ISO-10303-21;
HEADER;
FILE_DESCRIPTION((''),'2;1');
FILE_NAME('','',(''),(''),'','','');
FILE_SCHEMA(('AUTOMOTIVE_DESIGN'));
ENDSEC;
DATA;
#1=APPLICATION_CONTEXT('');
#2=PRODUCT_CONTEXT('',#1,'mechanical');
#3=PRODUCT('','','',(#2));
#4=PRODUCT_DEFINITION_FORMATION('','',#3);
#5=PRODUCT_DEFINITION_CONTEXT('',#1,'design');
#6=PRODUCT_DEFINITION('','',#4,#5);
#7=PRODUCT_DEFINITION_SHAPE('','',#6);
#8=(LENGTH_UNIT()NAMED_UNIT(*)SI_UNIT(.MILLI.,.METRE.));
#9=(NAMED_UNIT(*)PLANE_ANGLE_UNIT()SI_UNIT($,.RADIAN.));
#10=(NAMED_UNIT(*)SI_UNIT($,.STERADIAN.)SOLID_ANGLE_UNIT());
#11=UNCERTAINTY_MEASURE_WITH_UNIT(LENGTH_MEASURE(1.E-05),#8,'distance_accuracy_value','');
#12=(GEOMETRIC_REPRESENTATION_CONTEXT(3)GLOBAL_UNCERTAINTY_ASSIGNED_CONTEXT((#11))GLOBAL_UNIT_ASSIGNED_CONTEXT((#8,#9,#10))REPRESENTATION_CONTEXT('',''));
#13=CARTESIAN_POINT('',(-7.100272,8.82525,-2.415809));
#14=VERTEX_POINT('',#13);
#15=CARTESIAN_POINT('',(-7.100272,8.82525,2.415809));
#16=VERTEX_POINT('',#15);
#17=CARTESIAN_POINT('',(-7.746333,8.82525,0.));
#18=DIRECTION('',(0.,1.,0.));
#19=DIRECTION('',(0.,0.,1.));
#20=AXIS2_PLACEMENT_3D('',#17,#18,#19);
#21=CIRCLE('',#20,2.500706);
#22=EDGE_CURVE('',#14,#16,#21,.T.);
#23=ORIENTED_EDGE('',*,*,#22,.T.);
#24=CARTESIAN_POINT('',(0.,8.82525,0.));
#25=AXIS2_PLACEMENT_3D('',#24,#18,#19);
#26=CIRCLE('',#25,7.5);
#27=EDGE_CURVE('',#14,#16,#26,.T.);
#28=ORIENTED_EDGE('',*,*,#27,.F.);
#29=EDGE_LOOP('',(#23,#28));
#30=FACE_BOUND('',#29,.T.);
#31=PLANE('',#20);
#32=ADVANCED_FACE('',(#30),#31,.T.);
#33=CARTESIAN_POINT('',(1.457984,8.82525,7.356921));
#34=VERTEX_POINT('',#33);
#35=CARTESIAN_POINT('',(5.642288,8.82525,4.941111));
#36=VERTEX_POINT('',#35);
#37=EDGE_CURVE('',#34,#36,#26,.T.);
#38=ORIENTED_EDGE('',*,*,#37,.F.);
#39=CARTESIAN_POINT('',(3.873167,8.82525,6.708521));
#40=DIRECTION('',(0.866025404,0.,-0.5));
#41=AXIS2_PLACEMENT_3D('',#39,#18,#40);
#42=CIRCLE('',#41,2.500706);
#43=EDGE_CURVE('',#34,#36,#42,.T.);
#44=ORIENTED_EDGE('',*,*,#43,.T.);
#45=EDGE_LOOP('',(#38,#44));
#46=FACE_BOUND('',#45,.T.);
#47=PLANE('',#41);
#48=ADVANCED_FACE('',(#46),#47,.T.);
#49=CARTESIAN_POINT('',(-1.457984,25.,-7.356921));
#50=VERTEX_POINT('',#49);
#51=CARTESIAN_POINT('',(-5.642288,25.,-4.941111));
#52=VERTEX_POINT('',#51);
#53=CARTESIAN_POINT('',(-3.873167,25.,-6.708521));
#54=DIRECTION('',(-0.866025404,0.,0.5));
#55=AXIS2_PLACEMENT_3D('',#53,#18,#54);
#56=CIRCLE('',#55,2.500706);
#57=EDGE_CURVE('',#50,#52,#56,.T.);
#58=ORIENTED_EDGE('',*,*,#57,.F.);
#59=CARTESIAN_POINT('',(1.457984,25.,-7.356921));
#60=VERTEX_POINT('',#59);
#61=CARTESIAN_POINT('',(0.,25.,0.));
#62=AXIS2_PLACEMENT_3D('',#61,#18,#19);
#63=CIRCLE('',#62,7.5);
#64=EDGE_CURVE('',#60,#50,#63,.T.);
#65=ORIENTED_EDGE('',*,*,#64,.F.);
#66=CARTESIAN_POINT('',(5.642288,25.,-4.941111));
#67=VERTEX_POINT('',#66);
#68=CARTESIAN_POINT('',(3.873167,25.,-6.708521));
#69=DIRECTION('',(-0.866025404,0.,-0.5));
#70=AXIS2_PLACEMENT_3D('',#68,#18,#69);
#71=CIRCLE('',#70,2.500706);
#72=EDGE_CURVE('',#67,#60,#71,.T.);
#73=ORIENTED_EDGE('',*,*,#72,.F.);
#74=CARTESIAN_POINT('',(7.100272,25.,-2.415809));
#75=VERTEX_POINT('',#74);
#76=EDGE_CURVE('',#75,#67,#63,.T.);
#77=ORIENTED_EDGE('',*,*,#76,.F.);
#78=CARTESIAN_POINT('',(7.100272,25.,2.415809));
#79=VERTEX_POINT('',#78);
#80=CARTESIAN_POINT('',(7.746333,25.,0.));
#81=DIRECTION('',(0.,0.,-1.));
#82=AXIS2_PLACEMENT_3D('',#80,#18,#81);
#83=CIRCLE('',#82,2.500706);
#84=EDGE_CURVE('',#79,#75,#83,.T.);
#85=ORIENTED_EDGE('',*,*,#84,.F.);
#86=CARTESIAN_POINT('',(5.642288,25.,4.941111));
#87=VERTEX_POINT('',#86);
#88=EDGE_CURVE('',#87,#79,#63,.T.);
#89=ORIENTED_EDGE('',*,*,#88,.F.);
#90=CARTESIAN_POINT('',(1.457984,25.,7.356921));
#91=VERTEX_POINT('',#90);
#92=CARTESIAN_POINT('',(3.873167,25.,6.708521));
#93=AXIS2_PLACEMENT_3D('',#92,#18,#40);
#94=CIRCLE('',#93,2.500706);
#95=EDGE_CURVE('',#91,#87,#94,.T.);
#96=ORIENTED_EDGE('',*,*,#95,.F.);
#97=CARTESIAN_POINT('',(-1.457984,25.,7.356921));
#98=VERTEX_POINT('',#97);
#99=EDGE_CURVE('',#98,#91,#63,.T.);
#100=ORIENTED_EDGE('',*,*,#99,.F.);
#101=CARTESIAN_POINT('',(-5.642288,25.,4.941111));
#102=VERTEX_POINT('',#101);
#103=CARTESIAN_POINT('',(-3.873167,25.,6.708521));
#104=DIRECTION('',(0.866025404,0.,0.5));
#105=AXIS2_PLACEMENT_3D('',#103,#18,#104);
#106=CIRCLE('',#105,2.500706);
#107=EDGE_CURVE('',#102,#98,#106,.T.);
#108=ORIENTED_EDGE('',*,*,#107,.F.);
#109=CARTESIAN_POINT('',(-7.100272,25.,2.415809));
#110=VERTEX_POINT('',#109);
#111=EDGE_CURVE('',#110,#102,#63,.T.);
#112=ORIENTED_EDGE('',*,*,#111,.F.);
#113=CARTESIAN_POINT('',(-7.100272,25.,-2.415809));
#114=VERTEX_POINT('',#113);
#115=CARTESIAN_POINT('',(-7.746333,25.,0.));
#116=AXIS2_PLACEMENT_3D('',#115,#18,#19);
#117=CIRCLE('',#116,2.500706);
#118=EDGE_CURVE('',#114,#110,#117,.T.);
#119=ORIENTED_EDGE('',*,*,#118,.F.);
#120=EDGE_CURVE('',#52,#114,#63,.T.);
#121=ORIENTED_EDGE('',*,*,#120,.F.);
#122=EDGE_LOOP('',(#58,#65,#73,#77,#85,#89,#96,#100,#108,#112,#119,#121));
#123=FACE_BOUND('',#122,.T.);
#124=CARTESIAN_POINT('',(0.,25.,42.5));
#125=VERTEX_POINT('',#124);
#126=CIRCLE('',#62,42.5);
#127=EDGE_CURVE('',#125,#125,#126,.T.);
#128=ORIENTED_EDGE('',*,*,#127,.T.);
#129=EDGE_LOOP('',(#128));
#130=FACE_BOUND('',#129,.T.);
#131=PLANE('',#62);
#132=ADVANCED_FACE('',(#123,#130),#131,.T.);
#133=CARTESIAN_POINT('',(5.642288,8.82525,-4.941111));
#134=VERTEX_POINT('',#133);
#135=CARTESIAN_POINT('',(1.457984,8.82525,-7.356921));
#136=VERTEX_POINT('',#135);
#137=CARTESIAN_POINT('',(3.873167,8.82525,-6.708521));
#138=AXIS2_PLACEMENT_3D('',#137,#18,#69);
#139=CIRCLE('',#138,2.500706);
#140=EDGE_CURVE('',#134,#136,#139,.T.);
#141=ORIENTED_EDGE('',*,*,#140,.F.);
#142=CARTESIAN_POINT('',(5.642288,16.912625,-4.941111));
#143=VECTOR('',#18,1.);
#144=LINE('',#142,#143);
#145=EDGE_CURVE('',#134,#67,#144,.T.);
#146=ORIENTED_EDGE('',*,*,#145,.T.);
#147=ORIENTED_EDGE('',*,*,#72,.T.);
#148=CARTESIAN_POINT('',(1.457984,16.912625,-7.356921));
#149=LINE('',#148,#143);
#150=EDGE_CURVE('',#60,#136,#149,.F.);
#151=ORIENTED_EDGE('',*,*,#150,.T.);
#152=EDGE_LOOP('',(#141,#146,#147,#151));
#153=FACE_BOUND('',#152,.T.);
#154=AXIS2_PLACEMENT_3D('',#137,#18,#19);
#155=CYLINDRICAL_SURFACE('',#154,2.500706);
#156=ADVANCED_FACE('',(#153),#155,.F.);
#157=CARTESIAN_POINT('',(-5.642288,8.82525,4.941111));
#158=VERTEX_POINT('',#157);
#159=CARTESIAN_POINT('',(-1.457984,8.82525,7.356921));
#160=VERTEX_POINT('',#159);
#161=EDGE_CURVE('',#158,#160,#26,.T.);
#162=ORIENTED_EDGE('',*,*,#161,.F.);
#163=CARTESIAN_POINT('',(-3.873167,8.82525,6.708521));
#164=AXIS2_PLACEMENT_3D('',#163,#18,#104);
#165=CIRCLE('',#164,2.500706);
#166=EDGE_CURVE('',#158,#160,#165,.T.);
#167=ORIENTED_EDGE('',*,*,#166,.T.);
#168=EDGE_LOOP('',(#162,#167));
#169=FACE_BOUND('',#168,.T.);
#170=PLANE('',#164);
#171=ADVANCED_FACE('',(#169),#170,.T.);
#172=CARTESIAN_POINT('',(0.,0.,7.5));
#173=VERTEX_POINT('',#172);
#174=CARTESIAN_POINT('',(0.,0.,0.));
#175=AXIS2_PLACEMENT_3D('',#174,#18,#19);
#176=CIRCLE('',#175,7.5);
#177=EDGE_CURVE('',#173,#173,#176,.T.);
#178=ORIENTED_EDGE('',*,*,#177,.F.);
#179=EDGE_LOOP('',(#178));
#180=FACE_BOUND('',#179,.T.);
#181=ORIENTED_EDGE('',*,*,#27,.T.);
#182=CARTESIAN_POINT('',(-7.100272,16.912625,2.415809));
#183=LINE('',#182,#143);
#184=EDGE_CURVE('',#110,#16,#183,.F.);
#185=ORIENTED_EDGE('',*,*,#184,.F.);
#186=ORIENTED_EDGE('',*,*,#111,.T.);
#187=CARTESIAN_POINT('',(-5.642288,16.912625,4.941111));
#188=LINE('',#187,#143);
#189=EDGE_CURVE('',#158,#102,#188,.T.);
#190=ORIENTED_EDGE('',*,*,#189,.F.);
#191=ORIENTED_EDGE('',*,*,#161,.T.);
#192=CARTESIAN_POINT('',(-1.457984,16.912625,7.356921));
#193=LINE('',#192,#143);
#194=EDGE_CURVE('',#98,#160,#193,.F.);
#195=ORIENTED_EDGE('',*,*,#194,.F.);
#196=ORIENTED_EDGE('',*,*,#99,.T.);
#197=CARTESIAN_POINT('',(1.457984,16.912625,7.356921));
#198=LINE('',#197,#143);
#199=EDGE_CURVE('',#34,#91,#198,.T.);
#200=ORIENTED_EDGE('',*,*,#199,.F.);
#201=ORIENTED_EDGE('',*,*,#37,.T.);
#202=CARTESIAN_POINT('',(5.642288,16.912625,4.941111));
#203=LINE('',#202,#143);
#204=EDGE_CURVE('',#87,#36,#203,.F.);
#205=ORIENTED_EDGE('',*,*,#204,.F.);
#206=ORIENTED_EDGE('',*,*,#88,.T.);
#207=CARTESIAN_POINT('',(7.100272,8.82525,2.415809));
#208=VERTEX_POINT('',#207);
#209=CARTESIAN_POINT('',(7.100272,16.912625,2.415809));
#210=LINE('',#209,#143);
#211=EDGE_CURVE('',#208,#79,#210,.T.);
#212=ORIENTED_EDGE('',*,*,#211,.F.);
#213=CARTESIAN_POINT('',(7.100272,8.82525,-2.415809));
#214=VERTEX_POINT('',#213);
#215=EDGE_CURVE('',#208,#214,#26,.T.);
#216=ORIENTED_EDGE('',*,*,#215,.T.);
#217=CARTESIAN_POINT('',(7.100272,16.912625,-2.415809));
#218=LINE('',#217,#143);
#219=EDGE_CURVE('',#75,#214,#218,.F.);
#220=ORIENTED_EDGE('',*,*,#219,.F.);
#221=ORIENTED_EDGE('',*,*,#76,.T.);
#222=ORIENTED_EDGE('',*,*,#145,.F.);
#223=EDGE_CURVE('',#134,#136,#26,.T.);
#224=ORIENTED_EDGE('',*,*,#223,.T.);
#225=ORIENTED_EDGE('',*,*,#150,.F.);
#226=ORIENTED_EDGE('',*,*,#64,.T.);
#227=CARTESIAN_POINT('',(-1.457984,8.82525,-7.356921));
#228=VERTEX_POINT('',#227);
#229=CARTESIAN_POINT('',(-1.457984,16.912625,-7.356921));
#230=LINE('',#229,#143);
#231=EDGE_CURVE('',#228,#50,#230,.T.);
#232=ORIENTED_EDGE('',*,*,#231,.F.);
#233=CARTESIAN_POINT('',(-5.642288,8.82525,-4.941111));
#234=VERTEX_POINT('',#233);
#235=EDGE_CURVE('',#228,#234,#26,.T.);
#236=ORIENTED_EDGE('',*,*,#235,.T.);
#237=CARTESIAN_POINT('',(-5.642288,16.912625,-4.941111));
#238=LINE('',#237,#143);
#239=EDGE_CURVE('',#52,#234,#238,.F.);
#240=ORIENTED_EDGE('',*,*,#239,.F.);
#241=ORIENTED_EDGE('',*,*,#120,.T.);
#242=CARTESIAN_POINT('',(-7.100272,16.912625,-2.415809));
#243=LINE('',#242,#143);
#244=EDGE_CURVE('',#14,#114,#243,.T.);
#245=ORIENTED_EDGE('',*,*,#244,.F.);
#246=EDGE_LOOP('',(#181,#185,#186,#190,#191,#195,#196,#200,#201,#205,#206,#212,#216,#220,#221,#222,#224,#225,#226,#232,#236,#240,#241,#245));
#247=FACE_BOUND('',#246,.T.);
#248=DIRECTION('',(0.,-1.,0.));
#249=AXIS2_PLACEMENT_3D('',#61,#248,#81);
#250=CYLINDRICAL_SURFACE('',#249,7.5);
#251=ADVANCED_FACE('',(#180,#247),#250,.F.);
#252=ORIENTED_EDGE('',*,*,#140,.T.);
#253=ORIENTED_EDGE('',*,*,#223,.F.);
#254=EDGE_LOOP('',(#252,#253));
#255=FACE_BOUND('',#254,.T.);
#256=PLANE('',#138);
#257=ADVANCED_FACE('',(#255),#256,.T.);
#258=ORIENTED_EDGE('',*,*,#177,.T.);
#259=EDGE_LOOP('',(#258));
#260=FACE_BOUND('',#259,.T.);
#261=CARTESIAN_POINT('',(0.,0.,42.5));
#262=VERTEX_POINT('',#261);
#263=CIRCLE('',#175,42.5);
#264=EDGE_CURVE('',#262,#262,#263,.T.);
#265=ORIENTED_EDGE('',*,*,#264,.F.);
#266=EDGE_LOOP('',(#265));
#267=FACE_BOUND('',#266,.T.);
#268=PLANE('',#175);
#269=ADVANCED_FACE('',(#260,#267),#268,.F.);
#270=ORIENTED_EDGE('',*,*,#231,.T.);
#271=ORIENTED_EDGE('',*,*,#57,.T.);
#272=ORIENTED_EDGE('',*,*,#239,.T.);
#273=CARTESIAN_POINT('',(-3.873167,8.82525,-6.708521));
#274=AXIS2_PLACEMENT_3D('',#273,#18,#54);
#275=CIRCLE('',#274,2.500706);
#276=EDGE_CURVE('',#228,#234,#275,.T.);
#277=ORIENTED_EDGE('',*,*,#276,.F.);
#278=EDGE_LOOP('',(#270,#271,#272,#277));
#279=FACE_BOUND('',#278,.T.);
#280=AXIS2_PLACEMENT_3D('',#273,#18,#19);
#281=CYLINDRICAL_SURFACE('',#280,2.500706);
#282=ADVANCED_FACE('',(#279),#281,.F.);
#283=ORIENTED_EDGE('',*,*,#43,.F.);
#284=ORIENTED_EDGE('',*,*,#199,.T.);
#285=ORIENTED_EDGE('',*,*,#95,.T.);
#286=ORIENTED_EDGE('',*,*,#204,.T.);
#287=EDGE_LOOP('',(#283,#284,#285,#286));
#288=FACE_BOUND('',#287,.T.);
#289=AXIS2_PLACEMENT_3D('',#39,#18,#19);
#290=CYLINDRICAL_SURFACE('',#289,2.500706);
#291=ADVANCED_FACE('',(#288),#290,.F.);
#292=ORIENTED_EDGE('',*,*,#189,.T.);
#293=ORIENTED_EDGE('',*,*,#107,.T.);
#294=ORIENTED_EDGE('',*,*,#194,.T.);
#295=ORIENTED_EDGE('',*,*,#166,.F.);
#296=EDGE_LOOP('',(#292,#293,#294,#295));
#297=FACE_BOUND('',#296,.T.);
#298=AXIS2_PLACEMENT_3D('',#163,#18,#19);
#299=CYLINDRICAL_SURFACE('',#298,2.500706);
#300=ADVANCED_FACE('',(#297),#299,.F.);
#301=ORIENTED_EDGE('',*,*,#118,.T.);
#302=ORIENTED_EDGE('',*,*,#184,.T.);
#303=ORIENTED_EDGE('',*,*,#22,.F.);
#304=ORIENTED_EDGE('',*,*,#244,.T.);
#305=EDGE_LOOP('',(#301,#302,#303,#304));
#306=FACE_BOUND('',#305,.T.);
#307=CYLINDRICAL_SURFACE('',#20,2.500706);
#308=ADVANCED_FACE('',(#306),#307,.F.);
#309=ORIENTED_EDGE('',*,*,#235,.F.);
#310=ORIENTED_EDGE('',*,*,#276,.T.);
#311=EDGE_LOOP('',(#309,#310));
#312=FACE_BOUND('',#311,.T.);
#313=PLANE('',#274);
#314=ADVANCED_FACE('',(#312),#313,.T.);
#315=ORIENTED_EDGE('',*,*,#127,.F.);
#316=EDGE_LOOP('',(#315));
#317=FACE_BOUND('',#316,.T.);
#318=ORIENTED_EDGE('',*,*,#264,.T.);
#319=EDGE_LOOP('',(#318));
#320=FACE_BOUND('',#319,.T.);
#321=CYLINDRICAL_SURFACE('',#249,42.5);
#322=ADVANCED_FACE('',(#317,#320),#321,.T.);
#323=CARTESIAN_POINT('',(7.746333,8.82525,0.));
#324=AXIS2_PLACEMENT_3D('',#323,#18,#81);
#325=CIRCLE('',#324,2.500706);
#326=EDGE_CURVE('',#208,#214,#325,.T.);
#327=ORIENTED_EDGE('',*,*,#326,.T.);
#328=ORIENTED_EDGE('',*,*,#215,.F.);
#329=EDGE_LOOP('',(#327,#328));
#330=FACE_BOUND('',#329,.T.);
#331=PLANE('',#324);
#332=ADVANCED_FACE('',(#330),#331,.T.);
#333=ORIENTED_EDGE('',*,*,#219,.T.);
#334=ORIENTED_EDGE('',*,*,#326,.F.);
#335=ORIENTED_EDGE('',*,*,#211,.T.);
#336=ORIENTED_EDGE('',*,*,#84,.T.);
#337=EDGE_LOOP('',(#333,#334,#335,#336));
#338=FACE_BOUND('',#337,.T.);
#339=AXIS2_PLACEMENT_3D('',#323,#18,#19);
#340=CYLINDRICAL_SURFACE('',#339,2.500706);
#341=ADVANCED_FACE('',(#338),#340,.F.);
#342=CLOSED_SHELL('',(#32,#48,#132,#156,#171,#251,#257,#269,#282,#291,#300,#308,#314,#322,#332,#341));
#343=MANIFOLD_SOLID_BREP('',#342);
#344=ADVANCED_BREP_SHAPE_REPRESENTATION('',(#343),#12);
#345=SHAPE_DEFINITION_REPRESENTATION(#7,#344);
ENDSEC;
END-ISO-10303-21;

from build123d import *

# Parameters (mm, degrees)
SKETCH1_R           = 42.5
BOSS_EXTRUDE1_DEPTH = 25
SKETCH2_R           = 7.5
CUT_EXTRUDE1_DEPTH  = 66.096082831
SKETCH3_R           = 2.500705788
CUT_EXTRUDE2_DEPTH  = 16.174750041
CIRPATTERN1_COUNT   = 6


with BuildPart() as part:
    # Sketch1 → Boss-Extrude1 (new body)
    with BuildSketch(Plane(origin=(0, 0, 0), x_dir=(1, 0, 0), z_dir=(0, 1, 0))):
        Circle(SKETCH1_R)
    extrude(amount=BOSS_EXTRUDE1_DEPTH)

    # Sketch2 → Cut-Extrude1 (cut, through all)
    with BuildSketch(Plane(origin=(0, 0, 0), x_dir=(1, 0, 0), z_dir=(0, 1, 0))):
        Circle(SKETCH2_R)
    extrude(amount=CUT_EXTRUDE1_DEPTH, mode=Mode.SUBTRACT)

    # Sketch3 → Cut-Extrude2 (cut)
    with BuildSketch(Plane(origin=(0, 25, 0), x_dir=(1, 0, 0), z_dir=(0, 1, 0))):
        with Locations((-7.746333105, 0)):
            Circle(SKETCH3_R)
    cut_extrude2 = extrude(amount=-CUT_EXTRUDE2_DEPTH, mode=Mode.SUBTRACT)

    # CirPattern1: Cut-Extrude2 ×6 about axis
    cirpattern1_axis = Axis((0, 0, 0), (0, 1, 0))
    for i in range(1, CIRPATTERN1_COUNT):
        add(cut_extrude2.rotate(cirpattern1_axis, i * 360 / CIRPATTERN1_COUNT), mode=Mode.SUBTRACT)


solid = part.part
